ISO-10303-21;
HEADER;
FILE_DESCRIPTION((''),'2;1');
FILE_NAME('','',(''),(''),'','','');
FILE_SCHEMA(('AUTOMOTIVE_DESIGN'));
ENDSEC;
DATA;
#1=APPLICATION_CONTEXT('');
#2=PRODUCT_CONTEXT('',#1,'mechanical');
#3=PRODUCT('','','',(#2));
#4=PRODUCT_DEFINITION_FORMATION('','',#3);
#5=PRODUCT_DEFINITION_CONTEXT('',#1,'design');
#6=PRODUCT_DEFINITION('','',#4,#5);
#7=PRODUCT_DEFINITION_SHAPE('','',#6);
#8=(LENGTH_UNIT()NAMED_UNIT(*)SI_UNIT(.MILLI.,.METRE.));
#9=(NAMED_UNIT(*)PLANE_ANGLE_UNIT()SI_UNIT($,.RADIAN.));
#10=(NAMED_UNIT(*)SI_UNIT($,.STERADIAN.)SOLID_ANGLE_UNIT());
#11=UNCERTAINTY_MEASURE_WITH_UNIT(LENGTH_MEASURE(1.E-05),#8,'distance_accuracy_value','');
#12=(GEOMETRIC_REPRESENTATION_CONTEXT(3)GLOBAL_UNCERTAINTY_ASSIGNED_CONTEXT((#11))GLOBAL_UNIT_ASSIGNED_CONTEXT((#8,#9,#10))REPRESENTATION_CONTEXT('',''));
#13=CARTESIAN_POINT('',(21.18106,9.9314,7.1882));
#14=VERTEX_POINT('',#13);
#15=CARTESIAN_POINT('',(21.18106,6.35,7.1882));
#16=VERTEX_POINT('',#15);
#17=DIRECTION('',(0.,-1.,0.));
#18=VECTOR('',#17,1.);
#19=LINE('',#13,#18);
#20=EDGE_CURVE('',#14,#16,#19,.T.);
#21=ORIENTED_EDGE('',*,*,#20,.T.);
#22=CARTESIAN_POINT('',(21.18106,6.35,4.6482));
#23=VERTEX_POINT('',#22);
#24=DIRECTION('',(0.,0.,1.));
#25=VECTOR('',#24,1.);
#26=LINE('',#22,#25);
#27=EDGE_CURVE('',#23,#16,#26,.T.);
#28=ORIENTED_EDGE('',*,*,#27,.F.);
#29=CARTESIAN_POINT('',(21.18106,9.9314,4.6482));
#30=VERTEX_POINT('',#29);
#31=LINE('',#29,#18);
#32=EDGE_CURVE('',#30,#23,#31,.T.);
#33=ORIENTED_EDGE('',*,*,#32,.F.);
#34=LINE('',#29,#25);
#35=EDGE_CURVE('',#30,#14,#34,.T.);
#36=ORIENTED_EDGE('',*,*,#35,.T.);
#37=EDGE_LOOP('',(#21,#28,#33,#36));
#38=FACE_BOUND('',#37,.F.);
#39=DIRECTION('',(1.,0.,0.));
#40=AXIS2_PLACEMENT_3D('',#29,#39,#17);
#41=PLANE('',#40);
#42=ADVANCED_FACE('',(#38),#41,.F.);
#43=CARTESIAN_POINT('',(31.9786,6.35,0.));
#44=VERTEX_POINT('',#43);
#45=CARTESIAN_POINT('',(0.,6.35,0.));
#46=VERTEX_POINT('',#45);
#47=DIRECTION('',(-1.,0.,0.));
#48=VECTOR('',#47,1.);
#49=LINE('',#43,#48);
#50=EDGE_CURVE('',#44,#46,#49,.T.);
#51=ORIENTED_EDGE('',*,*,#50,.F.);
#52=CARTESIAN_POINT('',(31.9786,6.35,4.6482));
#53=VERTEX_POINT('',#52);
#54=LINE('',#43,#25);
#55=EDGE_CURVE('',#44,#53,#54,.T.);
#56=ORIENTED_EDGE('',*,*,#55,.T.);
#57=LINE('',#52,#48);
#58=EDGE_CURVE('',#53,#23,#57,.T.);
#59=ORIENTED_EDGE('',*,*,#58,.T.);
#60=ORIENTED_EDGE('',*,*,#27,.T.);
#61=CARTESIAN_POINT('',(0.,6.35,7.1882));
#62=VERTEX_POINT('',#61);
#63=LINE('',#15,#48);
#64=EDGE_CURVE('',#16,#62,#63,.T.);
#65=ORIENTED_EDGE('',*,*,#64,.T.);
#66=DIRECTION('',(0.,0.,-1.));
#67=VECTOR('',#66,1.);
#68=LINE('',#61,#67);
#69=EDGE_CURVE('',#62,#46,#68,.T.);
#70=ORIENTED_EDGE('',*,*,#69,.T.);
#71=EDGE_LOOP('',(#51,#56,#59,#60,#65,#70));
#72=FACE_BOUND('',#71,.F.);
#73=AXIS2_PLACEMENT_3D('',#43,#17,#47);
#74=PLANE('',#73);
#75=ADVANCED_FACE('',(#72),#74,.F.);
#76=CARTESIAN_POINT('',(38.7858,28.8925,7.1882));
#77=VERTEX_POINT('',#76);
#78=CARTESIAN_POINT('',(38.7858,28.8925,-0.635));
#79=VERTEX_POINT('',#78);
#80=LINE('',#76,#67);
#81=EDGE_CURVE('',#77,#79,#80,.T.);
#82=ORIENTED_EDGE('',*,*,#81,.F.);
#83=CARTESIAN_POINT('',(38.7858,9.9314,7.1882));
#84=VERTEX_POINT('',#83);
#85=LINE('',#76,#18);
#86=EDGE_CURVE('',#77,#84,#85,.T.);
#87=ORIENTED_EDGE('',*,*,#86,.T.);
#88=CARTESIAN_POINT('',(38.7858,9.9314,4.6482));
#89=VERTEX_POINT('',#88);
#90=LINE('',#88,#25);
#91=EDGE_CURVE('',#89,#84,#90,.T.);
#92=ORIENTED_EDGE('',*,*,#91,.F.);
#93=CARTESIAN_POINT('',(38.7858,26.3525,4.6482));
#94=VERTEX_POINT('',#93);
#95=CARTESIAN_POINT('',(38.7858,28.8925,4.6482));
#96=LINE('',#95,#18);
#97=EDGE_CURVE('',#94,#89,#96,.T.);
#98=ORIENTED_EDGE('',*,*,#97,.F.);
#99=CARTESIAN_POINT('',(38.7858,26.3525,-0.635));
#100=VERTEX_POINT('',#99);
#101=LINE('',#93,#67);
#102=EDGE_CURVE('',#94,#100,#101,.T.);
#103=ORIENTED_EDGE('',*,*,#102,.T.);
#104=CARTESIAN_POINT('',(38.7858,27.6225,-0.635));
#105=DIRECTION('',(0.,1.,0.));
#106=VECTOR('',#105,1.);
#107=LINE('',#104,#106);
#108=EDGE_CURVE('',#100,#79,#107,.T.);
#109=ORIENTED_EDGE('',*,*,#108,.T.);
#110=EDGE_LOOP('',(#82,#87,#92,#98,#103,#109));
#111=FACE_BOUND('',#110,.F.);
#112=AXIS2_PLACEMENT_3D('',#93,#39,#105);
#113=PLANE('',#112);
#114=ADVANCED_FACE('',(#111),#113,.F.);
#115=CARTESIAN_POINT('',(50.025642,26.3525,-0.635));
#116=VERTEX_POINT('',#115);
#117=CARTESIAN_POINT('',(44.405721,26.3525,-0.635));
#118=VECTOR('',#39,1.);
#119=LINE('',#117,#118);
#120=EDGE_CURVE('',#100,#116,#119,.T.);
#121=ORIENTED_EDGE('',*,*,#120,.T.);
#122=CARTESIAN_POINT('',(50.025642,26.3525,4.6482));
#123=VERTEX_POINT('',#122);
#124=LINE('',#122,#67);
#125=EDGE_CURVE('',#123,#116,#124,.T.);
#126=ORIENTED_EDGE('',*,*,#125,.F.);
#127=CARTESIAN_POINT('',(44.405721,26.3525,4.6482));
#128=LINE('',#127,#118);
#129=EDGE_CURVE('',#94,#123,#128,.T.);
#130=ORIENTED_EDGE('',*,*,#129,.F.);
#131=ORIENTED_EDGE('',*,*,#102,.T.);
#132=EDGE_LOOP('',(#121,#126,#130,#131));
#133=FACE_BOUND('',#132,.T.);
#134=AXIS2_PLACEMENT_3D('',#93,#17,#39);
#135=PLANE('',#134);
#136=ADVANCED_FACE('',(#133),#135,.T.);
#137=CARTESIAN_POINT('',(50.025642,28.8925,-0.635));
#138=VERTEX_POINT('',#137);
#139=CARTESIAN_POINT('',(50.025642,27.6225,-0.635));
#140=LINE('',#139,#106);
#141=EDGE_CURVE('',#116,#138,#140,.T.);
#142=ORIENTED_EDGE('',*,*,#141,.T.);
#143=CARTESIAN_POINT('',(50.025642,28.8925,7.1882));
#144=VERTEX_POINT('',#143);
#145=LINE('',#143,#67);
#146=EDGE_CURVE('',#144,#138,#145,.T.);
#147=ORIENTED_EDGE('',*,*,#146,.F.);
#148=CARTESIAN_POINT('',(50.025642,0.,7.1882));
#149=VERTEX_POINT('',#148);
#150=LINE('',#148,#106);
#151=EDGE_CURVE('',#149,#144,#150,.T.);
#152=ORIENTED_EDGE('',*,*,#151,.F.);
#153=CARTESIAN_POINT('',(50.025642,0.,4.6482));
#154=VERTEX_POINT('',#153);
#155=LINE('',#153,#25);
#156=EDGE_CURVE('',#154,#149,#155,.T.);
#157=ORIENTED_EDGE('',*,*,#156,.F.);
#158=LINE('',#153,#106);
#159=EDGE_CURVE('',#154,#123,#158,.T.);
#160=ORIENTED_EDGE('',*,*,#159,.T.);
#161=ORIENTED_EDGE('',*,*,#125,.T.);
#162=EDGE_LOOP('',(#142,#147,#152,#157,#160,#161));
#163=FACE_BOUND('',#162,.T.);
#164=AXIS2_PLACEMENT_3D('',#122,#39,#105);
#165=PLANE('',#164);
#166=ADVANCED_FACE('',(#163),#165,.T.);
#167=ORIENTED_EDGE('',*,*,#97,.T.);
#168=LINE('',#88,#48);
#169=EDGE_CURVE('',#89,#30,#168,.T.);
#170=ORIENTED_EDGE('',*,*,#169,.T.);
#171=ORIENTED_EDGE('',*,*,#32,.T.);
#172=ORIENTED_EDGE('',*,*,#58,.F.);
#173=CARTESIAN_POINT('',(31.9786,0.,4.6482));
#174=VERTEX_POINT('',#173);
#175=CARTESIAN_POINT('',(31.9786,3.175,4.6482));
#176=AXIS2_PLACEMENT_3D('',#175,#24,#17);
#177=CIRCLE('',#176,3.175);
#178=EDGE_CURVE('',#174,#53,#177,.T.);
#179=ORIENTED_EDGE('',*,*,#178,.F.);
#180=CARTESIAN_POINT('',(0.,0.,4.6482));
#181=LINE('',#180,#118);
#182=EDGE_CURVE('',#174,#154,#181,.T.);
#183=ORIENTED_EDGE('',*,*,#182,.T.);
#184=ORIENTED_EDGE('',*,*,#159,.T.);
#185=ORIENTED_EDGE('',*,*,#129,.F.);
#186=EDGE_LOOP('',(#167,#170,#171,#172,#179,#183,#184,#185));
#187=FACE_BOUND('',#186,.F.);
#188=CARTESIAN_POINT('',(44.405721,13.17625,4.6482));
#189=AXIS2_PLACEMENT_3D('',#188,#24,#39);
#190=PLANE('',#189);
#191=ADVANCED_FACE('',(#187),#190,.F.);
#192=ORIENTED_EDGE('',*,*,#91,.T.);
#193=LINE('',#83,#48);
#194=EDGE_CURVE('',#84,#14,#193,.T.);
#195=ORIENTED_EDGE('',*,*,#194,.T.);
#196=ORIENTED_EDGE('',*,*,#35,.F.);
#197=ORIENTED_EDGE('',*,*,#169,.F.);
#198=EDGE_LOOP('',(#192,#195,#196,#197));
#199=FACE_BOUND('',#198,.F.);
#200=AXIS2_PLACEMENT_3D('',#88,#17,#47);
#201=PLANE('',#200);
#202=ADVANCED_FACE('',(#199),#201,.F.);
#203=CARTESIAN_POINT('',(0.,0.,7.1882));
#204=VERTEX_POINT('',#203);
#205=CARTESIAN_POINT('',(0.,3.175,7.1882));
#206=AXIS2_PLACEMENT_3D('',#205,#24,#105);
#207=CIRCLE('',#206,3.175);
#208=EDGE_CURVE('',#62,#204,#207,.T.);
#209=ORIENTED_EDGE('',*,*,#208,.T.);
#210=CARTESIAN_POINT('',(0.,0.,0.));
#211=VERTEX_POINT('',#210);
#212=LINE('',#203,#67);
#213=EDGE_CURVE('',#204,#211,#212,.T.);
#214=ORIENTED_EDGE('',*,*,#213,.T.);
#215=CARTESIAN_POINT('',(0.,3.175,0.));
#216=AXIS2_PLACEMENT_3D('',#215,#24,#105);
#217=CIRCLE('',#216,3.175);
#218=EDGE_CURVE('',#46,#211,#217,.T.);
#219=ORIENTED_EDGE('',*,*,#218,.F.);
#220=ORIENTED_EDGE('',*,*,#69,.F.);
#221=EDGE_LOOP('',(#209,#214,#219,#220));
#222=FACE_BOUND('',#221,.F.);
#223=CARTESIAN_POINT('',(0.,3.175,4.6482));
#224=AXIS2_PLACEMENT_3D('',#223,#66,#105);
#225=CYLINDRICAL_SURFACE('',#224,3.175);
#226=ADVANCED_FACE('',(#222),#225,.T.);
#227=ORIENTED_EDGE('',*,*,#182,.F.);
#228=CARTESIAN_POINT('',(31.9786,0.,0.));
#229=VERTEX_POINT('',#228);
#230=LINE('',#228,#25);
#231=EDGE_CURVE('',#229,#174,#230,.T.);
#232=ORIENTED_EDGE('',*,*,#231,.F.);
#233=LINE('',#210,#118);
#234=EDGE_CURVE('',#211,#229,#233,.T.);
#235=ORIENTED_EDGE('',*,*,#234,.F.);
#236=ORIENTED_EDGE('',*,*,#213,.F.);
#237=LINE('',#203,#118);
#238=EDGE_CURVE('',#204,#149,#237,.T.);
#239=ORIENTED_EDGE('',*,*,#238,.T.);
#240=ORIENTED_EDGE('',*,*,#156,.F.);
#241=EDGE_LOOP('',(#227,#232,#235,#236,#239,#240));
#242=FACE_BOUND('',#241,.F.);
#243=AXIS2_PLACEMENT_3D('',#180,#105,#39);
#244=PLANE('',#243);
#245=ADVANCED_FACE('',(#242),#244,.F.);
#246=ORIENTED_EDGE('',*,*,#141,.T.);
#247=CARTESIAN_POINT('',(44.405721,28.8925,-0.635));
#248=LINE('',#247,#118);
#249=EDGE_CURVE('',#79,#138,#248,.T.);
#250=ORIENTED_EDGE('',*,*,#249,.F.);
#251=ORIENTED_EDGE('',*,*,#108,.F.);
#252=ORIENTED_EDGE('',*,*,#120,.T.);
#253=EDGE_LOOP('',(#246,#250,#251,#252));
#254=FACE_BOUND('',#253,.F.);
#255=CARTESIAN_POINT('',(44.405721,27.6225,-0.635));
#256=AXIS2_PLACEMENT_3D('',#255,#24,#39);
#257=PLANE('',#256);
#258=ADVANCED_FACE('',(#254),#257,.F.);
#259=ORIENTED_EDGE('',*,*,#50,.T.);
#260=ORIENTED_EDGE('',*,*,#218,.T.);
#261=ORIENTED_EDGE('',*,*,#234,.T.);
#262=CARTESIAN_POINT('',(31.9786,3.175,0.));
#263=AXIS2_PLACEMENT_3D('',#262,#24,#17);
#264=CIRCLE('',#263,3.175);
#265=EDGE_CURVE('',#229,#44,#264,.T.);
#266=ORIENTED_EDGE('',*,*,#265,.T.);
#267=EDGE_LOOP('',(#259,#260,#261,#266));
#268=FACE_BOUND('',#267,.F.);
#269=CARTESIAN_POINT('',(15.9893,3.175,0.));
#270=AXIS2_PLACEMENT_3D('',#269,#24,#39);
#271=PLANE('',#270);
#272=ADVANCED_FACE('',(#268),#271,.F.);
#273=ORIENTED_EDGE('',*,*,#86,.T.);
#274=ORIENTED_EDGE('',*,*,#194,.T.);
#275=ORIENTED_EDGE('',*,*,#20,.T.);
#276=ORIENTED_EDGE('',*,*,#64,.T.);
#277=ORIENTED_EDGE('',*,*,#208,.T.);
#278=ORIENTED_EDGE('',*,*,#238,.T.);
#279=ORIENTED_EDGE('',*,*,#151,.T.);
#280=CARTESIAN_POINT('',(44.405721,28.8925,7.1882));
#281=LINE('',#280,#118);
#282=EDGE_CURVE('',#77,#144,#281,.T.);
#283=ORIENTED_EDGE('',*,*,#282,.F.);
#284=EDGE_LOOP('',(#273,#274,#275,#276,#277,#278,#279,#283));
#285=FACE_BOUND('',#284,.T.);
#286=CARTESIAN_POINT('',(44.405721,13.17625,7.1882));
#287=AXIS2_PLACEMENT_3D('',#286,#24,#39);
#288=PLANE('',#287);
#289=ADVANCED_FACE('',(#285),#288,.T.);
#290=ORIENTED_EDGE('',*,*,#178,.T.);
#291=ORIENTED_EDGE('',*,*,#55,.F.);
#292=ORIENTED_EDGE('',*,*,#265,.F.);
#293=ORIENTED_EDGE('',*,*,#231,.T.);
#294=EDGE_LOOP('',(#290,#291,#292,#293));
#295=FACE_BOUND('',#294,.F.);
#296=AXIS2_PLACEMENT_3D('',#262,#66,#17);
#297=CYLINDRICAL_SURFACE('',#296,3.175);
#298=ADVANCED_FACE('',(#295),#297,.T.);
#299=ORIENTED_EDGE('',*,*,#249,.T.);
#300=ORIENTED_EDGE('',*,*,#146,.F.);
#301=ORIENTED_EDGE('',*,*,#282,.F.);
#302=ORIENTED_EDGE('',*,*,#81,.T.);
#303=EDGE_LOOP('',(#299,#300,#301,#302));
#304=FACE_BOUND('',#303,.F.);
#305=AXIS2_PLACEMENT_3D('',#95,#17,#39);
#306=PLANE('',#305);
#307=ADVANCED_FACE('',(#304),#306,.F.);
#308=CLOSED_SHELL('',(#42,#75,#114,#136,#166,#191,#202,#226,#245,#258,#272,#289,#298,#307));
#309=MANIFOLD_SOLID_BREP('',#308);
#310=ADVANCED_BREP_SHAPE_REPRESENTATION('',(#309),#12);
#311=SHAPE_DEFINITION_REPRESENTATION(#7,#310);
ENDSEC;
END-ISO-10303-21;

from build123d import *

# Parameters (mm, degrees)
F1_DEPTH = 4.6482
F2_W     = 11.2398419182
F2_H     = 2.54
F3_DEPTH = 2.54
F4_DEPTH = 5.2832


with BuildPart() as f1:
    # F0 (on Top) → F1 (new body)
    with BuildSketch(Plane.XY):
        with BuildLine():
            ThreePointArc((0, 6.35), (-3.175, 3.175), (0, 0))
            Line((0, 0), (31.9786, 0))
            ThreePointArc((31.9786, 0), (35.1536, 3.175), (31.9786, 6.35))
            Line((31.9786, 6.35), (0, 6.35))
        make_face()
    extrude(amount=F1_DEPTH)

    # F2 (on face) → F3 (join)
    with BuildSketch(Plane.XY.offset(4.6482)):
        Polygon((38.7858, 9.9314), (38.7858, 0), (50.0256419182, 0), (50.0256419182, 26.3525), (38.7858, 26.3525), align=None)
        with BuildLine():
            Line((31.9786, 0), (35.1536, 0))
            Line((35.1536, 0), (38.7858, 0))
            Line((38.7858, 0), (38.7858, 9.9314))
            Line((38.7858, 9.9314), (35.1536, 9.9314))
            Line((35.1536, 9.9314), (21.18106, 9.9314))
            Line((21.18106, 9.9314), (21.18106, 6.35))
            Line((21.18106, 6.35), (31.9786, 6.35))
            ThreePointArc((31.9786, 6.35), (35.1536, 3.175), (31.9786, 0))
        make_face()
        with BuildLine():
            Line((21.18106, 0), (31.9786, 0))
            ThreePointArc((31.9786, 0), (35.1536, 3.175), (31.9786, 6.35))
            Line((31.9786, 6.35), (21.18106, 6.35))
            Line((21.18106, 6.35), (21.18106, 0))
        make_face()
        with Locations((44.4057209591, 27.6225)):
            Rectangle(F2_W, F2_H)
        with BuildLine():
            Line((0, 0), (21.18106, 0))
            Line((21.18106, 0), (21.18106, 6.35))
            Line((21.18106, 6.35), (0, 6.35))
            ThreePointArc((0, 6.35), (-3.175, 3.175), (0, 0))
        make_face()
    extrude(amount=F3_DEPTH)

    # F2 (on face) → F4 (join)
    with BuildSketch(Plane.XY.offset(4.6482)):
        with Locations((44.4057209591, 27.6225)):
            Rectangle(F2_W, F2_H)
    extrude(amount=-F4_DEPTH)


solid = f1.part
